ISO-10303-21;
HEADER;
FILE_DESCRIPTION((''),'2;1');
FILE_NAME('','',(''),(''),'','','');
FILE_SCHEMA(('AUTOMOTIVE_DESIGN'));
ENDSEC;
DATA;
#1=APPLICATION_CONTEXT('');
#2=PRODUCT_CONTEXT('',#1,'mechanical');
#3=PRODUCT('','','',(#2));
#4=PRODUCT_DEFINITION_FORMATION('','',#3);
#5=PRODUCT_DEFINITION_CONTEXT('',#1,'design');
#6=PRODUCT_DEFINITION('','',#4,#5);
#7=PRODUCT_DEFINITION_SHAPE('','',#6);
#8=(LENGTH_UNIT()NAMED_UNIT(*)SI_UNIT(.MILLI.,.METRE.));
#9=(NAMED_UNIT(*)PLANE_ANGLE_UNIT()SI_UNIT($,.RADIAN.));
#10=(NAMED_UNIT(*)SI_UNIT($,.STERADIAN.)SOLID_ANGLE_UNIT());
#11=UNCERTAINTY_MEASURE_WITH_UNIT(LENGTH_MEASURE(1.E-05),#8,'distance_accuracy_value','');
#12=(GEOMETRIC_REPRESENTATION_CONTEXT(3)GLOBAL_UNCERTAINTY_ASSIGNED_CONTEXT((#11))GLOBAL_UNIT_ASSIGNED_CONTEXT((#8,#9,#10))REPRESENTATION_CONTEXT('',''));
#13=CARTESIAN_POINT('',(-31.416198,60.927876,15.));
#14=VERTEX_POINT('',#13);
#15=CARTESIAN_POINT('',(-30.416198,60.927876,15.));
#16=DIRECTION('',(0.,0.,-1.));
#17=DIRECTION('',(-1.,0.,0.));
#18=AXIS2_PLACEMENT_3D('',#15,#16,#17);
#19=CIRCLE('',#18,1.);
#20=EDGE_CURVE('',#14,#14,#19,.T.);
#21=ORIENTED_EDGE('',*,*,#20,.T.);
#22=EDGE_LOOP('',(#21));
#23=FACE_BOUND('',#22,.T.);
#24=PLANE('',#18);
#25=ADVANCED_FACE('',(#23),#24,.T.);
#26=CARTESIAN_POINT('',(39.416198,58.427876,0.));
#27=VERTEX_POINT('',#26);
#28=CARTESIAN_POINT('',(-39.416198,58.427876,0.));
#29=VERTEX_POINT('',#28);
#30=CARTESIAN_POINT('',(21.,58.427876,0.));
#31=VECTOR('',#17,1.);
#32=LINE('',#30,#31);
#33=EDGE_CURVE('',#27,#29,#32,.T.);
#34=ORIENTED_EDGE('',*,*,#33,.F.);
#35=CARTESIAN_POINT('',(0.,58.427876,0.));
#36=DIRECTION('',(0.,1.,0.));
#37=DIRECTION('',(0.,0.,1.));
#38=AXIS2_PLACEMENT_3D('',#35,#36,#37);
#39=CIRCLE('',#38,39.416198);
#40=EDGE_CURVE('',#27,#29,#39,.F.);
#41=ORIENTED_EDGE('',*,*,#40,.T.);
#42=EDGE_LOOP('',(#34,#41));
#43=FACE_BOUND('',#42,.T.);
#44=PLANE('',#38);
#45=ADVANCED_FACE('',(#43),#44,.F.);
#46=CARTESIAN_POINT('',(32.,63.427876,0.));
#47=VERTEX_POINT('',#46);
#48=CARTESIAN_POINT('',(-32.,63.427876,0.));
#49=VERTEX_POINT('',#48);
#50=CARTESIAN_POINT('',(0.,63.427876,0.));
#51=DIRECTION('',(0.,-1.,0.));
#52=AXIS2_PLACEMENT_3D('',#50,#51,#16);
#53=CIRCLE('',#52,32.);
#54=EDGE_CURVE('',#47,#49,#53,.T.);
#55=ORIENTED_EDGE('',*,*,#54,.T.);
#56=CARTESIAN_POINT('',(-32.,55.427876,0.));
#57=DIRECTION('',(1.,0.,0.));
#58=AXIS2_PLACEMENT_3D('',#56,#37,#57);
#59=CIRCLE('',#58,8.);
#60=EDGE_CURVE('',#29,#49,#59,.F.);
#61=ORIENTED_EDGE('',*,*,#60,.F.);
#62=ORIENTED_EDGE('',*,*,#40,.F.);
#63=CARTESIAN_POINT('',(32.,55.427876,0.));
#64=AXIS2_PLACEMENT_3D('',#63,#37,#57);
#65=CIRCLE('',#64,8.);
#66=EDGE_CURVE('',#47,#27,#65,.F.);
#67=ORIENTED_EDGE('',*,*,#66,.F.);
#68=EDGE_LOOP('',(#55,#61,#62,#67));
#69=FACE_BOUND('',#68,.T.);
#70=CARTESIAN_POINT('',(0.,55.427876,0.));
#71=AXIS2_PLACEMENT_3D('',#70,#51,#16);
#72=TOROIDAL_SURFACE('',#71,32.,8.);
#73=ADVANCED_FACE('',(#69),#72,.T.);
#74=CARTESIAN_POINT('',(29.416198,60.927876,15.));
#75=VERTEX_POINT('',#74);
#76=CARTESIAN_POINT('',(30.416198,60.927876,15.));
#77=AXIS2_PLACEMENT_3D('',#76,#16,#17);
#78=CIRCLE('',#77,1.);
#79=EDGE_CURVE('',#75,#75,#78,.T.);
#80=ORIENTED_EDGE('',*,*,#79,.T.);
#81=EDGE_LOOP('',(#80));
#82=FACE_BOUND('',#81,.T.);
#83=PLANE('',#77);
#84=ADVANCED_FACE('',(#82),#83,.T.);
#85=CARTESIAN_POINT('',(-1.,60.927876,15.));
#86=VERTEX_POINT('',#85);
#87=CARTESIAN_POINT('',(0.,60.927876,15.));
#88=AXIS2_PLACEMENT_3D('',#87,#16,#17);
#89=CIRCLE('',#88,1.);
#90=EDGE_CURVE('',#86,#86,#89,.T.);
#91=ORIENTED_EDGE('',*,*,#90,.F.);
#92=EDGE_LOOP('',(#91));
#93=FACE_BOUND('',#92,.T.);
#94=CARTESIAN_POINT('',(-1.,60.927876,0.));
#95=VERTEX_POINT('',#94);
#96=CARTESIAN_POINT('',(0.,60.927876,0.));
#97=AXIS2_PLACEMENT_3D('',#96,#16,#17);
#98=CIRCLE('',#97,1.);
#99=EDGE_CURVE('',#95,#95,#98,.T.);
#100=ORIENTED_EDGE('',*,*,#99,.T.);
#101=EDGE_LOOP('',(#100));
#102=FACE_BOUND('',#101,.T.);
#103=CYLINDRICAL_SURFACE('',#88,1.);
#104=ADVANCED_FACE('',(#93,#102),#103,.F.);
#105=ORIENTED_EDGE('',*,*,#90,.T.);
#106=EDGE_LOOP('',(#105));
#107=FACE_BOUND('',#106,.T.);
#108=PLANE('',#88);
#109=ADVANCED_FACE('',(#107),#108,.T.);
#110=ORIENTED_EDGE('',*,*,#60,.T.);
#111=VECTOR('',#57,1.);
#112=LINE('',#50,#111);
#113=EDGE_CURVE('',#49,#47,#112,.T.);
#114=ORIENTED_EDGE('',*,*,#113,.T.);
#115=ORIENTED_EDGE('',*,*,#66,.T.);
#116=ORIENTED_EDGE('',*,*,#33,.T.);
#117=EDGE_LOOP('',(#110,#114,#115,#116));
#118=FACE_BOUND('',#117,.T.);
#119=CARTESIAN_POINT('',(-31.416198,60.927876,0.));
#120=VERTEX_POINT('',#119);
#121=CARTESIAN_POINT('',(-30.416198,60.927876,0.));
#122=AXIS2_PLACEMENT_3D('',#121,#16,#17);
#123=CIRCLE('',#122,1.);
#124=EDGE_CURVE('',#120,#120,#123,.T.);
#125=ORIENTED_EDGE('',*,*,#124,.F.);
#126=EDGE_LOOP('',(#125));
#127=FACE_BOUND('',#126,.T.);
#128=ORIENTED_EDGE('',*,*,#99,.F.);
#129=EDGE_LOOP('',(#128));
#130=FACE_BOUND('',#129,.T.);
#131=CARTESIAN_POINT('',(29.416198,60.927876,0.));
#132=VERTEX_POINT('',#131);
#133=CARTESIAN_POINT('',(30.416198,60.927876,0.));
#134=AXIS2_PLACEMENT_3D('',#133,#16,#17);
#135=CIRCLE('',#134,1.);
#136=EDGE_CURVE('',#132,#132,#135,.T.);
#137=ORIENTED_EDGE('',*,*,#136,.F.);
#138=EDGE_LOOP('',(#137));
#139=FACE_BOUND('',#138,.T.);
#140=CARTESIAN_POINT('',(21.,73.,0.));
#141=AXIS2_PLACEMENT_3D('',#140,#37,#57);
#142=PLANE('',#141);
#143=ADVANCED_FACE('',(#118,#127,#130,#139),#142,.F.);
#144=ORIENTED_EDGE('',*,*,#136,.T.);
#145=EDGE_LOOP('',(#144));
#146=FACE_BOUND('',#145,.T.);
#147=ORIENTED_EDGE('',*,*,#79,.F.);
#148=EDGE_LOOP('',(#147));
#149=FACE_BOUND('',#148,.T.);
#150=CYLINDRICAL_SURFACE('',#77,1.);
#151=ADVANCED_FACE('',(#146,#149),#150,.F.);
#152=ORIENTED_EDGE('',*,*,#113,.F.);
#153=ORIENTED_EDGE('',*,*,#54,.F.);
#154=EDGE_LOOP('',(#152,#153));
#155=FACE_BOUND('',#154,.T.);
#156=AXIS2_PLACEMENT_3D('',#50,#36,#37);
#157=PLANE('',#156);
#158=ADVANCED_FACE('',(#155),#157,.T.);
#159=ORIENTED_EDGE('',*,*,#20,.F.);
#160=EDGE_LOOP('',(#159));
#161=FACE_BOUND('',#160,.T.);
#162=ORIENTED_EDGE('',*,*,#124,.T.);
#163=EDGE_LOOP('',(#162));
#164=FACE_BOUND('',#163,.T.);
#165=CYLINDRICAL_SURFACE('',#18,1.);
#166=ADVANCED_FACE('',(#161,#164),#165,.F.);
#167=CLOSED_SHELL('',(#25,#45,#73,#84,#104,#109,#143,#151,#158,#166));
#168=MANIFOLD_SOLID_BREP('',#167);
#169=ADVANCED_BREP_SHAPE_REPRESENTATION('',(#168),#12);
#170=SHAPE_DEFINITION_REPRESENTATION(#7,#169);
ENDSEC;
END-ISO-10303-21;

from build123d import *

# Parameters (mm, degrees)
CUT_EXTRUDE3_DEPTH           = 60
CUT_EXTRUDE5_DEPTH           = 2
CUT_EXTRUDE5_DEPTH_BACK      = 30
SKETCH9_R                    = 38
SKETCH9_R_2                  = 23
SKETCH19_W                   = 12
SKETCH19_H                   = 36.5
CUT_REVOLVE2_ANGLE           = 65
CUT_REVOLVE2_OTHER_WAY_ANGLE = 65
SKETCH21_W                   = 3.25
SKETCH21_H                   = 4
BOSS_EXTRUDE3_DEPTH          = 1.35
CIRPATTERN1_COUNT            = 5
CUT_EXTRUDE9_START           = -5
CUT_EXTRUDE9_DEPTH           = 5
SKETCH23_R                   = 10.5
CUT_EXTRUDE10_DEPTH          = 10
SKETCH24_W                   = 17
SKETCH24_H                   = 12
BOSS_EXTRUDE4_DEPTH          = 8
SKETCH26_W                   = 12
SKETCH26_H                   = 8
CUT_EXTRUDE11_DEPTH          = 10
SKETCH27_W                   = 4
SKETCH27_H                   = 5
CUT_EXTRUDE12_DEPTH          = 5
CUT_EXTRUDE14_DEPTH          = 2
CUT_EXTRUDE14_DEPTH_BACK     = 30
SKETCH29_R                   = 1
CUT_EXTRUDE15_DEPTH          = 15
FILLET1_R                    = 6
FILLET2_R                    = 8
INTERSECT2_DEPTH             = 58.427876097


# Read off the part's stored shape, not the designer's step: Cut-Extrude9, Intersect2
with BuildPart() as part:
    # Sketch1 → Revolve1 (revolve)
    with BuildSketch(Plane.XY, mode=Mode.PRIVATE) as revolve1_sk:
        with BuildLine():
            Line((0, 63.427876097), (32, 63.427876097))
            ThreePointArc((32, 63.427876097), (37.656854249, 61.084730346), (40, 55.427876097))
            Line((40, 55.427876097), (40, 28.846818009))
            ThreePointArc((40, 28.846818009), (38.792081772, 24.082439968), (35.460140376, 20.469057744))
            Line((35.460140376, 20.469057744), (28.539859624, 15.958818353))
            ThreePointArc((28.539859624, 15.958818353), (25.207918228, 12.345436129), (24, 7.581058088))
            Line((24, 7.581058088), (24, 3.25))
            Line((24, 3.25), (24.35, 3))
            Line((24.35, 3), (24.35, 0))
            Line((24.35, 0), (22.5, 0))
            Line((22.5, 0), (22.5, 12.5))
            ThreePointArc((22.5, 12.5), (22.353553391, 12.853553391), (22, 13))
            Line((22, 13), (0, 13))
            Line((0, 13), (0, 63.427876097))
        make_face()
    revolve(revolve1_sk.sketch.rotate(Axis((0, 0, 0), (0, 1, 0)), 90), axis=Axis((0, 0, 0), (0, 1, 0)))

    # Sketch11 → Cut-Extrude3 (cut)
    with BuildSketch(Plane(origin=(0, 13, 0), x_dir=(-1, 0, 0), z_dir=(0, -1, 0))):
        with BuildLine():
            Line((-21, 0), (21, 0))
            ThreePointArc((21, 0), (0, 21), (-21, 0))
        make_face()
    extrude(amount=-CUT_EXTRUDE3_DEPTH, mode=Mode.SUBTRACT)

    # Sketch9 → Cut-Extrude5 (cut, two sides: drawn at the far end of the back side and taken through both)
    with BuildSketch(Plane(origin=(0, 55.427876097, 0), x_dir=(1, 0, 0), z_dir=(0, 1, 0)).offset(-CUT_EXTRUDE5_DEPTH_BACK)):
        with Locations(Location((0, 0, 0), (0, 0, 270))):
            Circle(SKETCH9_R)
        with Locations(Location((0, 0, 0), (0, 0, 270))):
            Circle(SKETCH9_R_2, mode=Mode.SUBTRACT)
    extrude(amount=CUT_EXTRUDE5_DEPTH + CUT_EXTRUDE5_DEPTH_BACK, mode=Mode.SUBTRACT)

    # Sketch19 → Cut-Revolve2 (revolve, cut)
    with BuildSketch(Plane(origin=(0, 0, 0), x_dir=(0, 0, -1), z_dir=(1, 0, 0))):
        with Locations((-41.064715832, 37.177876097)):
            Rectangle(SKETCH19_W, SKETCH19_H)
    revolve(axis=Axis((0, 0, 0), (0, 1, 0)), revolution_arc=CUT_REVOLVE2_ANGLE, mode=Mode.SUBTRACT)

    # Sketch19 → Cut-Revolve2 other way (revolve, cut)
    with BuildSketch(Plane(origin=(0, 0, 0), x_dir=(0, 0, -1), z_dir=(1, 0, 0))):
        with Locations((-41.064715832, 37.177876097)):
            Rectangle(SKETCH19_W, SKETCH19_H)
    revolve(axis=Axis((0, 0, 0), (0, -1, 0)), revolution_arc=CUT_REVOLVE2_OTHER_WAY_ANGLE, mode=Mode.SUBTRACT)

    # Sketch21 → Boss-Extrude3 (add)
    with BuildSketch(Plane(origin=(0, 0, 22.5), x_dir=(-1, 0, 0), z_dir=(0, 0, -1))):
        with Locations((0, 2)):
            Rectangle(SKETCH21_W, SKETCH21_H)
    boss_extrude3 = extrude(amount=BOSS_EXTRUDE3_DEPTH)

    # CirPattern1: Boss-Extrude3 ×5 about axis
    cirpattern1_axis = Axis((0, 0, 0), (0, 1, 0))
    for i in range(1, CIRPATTERN1_COUNT):
        add(boss_extrude3.rotate(cirpattern1_axis, i * 360 / CIRPATTERN1_COUNT))

    # Cut-Extrude9 outline → Cut-Extrude9 (cut)
    with BuildSketch(Plane(origin=(0, 63.427876097, 0), x_dir=(1, 0, 0), z_dir=(0, 1, 0)).offset(CUT_EXTRUDE9_START)):
        with BuildLine():
            ThreePointArc((40, 0), (0, 40), (-40, 0))
            Line((-40, 0), (-21, 0))
            ThreePointArc((-21, 0), (0, 21), (21, 0))
            Line((21, 0), (40, 0))
        make_face()
    extrude(amount=CUT_EXTRUDE9_DEPTH, mode=Mode.SUBTRACT)

    # Sketch23 → Cut-Extrude10 (cut)
    with BuildSketch(Plane(origin=(0, 0, -40), x_dir=(-1, 0, 0), z_dir=(0, 0, -1))):
        with Locations((0, 42.137876097)):
            Circle(SKETCH23_R)
    extrude(amount=-CUT_EXTRUDE10_DEPTH, mode=Mode.SUBTRACT)

    # Sketch24 → Boss-Extrude4 (add)
    with BuildSketch(Plane(origin=(0, 58.427876097, 0), x_dir=(1, 0, 0), z_dir=(0, 1, 0))):
        with Locations((0, 30)):
            Rectangle(SKETCH24_W, SKETCH24_H)
    extrude(amount=-BOSS_EXTRUDE4_DEPTH)

    # Sketch26 → Cut-Extrude11 (cut)
    with BuildSketch(Plane(origin=(0, 58.427876097, 0), x_dir=(1, 0, 0), z_dir=(0, 1, 0))):
        with Locations((0, 30)):
            Rectangle(SKETCH26_W, SKETCH26_H)
    extrude(amount=-CUT_EXTRUDE11_DEPTH, mode=Mode.SUBTRACT)

    # Sketch27 → Cut-Extrude12 (cut)
    with BuildSketch(Plane(origin=(8.5, 0, 0), x_dir=(0, 0, -1), z_dir=(1, 0, 0))):
        with Locations((29.5, 53.927876097)):
            Rectangle(SKETCH27_W, SKETCH27_H)
    extrude(amount=-CUT_EXTRUDE12_DEPTH, mode=Mode.SUBTRACT)

    # Sketch28 → Cut-Extrude14 (cut, two sides: drawn at the far end of the back side and taken through both)
    with BuildSketch(Plane(origin=(0, 55.427876097, 0), x_dir=(1, 0, 0), z_dir=(0, 1, 0)).offset(-CUT_EXTRUDE14_DEPTH_BACK)):
        with BuildLine():
            Line((-22.912878475, -2), (22.912878475, -2))
            ThreePointArc((22.912878475, -2), (0, -23), (-22.912878475, -2))
        make_face()
    extrude(amount=CUT_EXTRUDE14_DEPTH + CUT_EXTRUDE14_DEPTH_BACK, mode=Mode.SUBTRACT)

    # Sketch29 → Cut-Extrude15 (cut)
    with BuildSketch(Plane(origin=(0, 0, 0), x_dir=(-1, 0, 0), z_dir=(0, 0, -1))):
        with Locations((-30.416198487, 60.927876097)):
            Circle(SKETCH29_R)
        with Locations((30.416198487, 60.927876097)):
            Circle(SKETCH29_R)
        with Locations((0, 60.927876097)):
            Circle(SKETCH29_R)
    extrude(amount=-CUT_EXTRUDE15_DEPTH, mode=Mode.SUBTRACT)

    # Fillet1
    fillet1_edges = [part.edges().sort_by_distance(p)[0] for p in [
        (21, 35.713938048, 0),
        (-21, 35.713938048, 0),
    ]]
    fillet(fillet1_edges, radius=FILLET1_R)

    # Fillet2
    fillet2_edges = [part.edges().sort_by_distance(p)[0] for p in [
        (-22.912878475, 41.427876097, 2),
        (22.912878475, 41.427876097, 2),
    ]]
    fillet(fillet2_edges, radius=FILLET2_R)

    # Intersect2 outline → Intersect2 (cut)
    with BuildSketch(Plane(origin=(0, 0, 0), x_dir=(1, 0, 0), z_dir=(0, 1, 0))):
        with BuildLine():
            Line((-37.508702776, -13.895942431), (-42, -15.355253362))
            Line((-42, -15.355253362), (-42, -41))
            Line((-42, -41), (42, -41))
            Line((42, -41), (42, -15.355253362))
            Line((42, -15.355253362), (37.508702776, -13.895942431))
            ThreePointArc((37.508702776, -13.895942431), (0, 40), (-37.508702776, -13.895942431))
        make_face()
        with BuildLine():
            ThreePointArc((19.246817919, 8.4), (18.767687244, 2.713664655), (13.747727085, 0))
            Line((13.747727085, 0), (-13.747727085, 0))
            ThreePointArc((-13.747727085, 0), (-18.767687244, 2.713664655), (-19.246817919, 8.4))
            ThreePointArc((-19.246817919, 8.4), (0, 21), (19.246817919, 8.4))
        make_face(mode=Mode.SUBTRACT)
    extrude(amount=INTERSECT2_DEPTH, mode=Mode.SUBTRACT)


solid = part.part
